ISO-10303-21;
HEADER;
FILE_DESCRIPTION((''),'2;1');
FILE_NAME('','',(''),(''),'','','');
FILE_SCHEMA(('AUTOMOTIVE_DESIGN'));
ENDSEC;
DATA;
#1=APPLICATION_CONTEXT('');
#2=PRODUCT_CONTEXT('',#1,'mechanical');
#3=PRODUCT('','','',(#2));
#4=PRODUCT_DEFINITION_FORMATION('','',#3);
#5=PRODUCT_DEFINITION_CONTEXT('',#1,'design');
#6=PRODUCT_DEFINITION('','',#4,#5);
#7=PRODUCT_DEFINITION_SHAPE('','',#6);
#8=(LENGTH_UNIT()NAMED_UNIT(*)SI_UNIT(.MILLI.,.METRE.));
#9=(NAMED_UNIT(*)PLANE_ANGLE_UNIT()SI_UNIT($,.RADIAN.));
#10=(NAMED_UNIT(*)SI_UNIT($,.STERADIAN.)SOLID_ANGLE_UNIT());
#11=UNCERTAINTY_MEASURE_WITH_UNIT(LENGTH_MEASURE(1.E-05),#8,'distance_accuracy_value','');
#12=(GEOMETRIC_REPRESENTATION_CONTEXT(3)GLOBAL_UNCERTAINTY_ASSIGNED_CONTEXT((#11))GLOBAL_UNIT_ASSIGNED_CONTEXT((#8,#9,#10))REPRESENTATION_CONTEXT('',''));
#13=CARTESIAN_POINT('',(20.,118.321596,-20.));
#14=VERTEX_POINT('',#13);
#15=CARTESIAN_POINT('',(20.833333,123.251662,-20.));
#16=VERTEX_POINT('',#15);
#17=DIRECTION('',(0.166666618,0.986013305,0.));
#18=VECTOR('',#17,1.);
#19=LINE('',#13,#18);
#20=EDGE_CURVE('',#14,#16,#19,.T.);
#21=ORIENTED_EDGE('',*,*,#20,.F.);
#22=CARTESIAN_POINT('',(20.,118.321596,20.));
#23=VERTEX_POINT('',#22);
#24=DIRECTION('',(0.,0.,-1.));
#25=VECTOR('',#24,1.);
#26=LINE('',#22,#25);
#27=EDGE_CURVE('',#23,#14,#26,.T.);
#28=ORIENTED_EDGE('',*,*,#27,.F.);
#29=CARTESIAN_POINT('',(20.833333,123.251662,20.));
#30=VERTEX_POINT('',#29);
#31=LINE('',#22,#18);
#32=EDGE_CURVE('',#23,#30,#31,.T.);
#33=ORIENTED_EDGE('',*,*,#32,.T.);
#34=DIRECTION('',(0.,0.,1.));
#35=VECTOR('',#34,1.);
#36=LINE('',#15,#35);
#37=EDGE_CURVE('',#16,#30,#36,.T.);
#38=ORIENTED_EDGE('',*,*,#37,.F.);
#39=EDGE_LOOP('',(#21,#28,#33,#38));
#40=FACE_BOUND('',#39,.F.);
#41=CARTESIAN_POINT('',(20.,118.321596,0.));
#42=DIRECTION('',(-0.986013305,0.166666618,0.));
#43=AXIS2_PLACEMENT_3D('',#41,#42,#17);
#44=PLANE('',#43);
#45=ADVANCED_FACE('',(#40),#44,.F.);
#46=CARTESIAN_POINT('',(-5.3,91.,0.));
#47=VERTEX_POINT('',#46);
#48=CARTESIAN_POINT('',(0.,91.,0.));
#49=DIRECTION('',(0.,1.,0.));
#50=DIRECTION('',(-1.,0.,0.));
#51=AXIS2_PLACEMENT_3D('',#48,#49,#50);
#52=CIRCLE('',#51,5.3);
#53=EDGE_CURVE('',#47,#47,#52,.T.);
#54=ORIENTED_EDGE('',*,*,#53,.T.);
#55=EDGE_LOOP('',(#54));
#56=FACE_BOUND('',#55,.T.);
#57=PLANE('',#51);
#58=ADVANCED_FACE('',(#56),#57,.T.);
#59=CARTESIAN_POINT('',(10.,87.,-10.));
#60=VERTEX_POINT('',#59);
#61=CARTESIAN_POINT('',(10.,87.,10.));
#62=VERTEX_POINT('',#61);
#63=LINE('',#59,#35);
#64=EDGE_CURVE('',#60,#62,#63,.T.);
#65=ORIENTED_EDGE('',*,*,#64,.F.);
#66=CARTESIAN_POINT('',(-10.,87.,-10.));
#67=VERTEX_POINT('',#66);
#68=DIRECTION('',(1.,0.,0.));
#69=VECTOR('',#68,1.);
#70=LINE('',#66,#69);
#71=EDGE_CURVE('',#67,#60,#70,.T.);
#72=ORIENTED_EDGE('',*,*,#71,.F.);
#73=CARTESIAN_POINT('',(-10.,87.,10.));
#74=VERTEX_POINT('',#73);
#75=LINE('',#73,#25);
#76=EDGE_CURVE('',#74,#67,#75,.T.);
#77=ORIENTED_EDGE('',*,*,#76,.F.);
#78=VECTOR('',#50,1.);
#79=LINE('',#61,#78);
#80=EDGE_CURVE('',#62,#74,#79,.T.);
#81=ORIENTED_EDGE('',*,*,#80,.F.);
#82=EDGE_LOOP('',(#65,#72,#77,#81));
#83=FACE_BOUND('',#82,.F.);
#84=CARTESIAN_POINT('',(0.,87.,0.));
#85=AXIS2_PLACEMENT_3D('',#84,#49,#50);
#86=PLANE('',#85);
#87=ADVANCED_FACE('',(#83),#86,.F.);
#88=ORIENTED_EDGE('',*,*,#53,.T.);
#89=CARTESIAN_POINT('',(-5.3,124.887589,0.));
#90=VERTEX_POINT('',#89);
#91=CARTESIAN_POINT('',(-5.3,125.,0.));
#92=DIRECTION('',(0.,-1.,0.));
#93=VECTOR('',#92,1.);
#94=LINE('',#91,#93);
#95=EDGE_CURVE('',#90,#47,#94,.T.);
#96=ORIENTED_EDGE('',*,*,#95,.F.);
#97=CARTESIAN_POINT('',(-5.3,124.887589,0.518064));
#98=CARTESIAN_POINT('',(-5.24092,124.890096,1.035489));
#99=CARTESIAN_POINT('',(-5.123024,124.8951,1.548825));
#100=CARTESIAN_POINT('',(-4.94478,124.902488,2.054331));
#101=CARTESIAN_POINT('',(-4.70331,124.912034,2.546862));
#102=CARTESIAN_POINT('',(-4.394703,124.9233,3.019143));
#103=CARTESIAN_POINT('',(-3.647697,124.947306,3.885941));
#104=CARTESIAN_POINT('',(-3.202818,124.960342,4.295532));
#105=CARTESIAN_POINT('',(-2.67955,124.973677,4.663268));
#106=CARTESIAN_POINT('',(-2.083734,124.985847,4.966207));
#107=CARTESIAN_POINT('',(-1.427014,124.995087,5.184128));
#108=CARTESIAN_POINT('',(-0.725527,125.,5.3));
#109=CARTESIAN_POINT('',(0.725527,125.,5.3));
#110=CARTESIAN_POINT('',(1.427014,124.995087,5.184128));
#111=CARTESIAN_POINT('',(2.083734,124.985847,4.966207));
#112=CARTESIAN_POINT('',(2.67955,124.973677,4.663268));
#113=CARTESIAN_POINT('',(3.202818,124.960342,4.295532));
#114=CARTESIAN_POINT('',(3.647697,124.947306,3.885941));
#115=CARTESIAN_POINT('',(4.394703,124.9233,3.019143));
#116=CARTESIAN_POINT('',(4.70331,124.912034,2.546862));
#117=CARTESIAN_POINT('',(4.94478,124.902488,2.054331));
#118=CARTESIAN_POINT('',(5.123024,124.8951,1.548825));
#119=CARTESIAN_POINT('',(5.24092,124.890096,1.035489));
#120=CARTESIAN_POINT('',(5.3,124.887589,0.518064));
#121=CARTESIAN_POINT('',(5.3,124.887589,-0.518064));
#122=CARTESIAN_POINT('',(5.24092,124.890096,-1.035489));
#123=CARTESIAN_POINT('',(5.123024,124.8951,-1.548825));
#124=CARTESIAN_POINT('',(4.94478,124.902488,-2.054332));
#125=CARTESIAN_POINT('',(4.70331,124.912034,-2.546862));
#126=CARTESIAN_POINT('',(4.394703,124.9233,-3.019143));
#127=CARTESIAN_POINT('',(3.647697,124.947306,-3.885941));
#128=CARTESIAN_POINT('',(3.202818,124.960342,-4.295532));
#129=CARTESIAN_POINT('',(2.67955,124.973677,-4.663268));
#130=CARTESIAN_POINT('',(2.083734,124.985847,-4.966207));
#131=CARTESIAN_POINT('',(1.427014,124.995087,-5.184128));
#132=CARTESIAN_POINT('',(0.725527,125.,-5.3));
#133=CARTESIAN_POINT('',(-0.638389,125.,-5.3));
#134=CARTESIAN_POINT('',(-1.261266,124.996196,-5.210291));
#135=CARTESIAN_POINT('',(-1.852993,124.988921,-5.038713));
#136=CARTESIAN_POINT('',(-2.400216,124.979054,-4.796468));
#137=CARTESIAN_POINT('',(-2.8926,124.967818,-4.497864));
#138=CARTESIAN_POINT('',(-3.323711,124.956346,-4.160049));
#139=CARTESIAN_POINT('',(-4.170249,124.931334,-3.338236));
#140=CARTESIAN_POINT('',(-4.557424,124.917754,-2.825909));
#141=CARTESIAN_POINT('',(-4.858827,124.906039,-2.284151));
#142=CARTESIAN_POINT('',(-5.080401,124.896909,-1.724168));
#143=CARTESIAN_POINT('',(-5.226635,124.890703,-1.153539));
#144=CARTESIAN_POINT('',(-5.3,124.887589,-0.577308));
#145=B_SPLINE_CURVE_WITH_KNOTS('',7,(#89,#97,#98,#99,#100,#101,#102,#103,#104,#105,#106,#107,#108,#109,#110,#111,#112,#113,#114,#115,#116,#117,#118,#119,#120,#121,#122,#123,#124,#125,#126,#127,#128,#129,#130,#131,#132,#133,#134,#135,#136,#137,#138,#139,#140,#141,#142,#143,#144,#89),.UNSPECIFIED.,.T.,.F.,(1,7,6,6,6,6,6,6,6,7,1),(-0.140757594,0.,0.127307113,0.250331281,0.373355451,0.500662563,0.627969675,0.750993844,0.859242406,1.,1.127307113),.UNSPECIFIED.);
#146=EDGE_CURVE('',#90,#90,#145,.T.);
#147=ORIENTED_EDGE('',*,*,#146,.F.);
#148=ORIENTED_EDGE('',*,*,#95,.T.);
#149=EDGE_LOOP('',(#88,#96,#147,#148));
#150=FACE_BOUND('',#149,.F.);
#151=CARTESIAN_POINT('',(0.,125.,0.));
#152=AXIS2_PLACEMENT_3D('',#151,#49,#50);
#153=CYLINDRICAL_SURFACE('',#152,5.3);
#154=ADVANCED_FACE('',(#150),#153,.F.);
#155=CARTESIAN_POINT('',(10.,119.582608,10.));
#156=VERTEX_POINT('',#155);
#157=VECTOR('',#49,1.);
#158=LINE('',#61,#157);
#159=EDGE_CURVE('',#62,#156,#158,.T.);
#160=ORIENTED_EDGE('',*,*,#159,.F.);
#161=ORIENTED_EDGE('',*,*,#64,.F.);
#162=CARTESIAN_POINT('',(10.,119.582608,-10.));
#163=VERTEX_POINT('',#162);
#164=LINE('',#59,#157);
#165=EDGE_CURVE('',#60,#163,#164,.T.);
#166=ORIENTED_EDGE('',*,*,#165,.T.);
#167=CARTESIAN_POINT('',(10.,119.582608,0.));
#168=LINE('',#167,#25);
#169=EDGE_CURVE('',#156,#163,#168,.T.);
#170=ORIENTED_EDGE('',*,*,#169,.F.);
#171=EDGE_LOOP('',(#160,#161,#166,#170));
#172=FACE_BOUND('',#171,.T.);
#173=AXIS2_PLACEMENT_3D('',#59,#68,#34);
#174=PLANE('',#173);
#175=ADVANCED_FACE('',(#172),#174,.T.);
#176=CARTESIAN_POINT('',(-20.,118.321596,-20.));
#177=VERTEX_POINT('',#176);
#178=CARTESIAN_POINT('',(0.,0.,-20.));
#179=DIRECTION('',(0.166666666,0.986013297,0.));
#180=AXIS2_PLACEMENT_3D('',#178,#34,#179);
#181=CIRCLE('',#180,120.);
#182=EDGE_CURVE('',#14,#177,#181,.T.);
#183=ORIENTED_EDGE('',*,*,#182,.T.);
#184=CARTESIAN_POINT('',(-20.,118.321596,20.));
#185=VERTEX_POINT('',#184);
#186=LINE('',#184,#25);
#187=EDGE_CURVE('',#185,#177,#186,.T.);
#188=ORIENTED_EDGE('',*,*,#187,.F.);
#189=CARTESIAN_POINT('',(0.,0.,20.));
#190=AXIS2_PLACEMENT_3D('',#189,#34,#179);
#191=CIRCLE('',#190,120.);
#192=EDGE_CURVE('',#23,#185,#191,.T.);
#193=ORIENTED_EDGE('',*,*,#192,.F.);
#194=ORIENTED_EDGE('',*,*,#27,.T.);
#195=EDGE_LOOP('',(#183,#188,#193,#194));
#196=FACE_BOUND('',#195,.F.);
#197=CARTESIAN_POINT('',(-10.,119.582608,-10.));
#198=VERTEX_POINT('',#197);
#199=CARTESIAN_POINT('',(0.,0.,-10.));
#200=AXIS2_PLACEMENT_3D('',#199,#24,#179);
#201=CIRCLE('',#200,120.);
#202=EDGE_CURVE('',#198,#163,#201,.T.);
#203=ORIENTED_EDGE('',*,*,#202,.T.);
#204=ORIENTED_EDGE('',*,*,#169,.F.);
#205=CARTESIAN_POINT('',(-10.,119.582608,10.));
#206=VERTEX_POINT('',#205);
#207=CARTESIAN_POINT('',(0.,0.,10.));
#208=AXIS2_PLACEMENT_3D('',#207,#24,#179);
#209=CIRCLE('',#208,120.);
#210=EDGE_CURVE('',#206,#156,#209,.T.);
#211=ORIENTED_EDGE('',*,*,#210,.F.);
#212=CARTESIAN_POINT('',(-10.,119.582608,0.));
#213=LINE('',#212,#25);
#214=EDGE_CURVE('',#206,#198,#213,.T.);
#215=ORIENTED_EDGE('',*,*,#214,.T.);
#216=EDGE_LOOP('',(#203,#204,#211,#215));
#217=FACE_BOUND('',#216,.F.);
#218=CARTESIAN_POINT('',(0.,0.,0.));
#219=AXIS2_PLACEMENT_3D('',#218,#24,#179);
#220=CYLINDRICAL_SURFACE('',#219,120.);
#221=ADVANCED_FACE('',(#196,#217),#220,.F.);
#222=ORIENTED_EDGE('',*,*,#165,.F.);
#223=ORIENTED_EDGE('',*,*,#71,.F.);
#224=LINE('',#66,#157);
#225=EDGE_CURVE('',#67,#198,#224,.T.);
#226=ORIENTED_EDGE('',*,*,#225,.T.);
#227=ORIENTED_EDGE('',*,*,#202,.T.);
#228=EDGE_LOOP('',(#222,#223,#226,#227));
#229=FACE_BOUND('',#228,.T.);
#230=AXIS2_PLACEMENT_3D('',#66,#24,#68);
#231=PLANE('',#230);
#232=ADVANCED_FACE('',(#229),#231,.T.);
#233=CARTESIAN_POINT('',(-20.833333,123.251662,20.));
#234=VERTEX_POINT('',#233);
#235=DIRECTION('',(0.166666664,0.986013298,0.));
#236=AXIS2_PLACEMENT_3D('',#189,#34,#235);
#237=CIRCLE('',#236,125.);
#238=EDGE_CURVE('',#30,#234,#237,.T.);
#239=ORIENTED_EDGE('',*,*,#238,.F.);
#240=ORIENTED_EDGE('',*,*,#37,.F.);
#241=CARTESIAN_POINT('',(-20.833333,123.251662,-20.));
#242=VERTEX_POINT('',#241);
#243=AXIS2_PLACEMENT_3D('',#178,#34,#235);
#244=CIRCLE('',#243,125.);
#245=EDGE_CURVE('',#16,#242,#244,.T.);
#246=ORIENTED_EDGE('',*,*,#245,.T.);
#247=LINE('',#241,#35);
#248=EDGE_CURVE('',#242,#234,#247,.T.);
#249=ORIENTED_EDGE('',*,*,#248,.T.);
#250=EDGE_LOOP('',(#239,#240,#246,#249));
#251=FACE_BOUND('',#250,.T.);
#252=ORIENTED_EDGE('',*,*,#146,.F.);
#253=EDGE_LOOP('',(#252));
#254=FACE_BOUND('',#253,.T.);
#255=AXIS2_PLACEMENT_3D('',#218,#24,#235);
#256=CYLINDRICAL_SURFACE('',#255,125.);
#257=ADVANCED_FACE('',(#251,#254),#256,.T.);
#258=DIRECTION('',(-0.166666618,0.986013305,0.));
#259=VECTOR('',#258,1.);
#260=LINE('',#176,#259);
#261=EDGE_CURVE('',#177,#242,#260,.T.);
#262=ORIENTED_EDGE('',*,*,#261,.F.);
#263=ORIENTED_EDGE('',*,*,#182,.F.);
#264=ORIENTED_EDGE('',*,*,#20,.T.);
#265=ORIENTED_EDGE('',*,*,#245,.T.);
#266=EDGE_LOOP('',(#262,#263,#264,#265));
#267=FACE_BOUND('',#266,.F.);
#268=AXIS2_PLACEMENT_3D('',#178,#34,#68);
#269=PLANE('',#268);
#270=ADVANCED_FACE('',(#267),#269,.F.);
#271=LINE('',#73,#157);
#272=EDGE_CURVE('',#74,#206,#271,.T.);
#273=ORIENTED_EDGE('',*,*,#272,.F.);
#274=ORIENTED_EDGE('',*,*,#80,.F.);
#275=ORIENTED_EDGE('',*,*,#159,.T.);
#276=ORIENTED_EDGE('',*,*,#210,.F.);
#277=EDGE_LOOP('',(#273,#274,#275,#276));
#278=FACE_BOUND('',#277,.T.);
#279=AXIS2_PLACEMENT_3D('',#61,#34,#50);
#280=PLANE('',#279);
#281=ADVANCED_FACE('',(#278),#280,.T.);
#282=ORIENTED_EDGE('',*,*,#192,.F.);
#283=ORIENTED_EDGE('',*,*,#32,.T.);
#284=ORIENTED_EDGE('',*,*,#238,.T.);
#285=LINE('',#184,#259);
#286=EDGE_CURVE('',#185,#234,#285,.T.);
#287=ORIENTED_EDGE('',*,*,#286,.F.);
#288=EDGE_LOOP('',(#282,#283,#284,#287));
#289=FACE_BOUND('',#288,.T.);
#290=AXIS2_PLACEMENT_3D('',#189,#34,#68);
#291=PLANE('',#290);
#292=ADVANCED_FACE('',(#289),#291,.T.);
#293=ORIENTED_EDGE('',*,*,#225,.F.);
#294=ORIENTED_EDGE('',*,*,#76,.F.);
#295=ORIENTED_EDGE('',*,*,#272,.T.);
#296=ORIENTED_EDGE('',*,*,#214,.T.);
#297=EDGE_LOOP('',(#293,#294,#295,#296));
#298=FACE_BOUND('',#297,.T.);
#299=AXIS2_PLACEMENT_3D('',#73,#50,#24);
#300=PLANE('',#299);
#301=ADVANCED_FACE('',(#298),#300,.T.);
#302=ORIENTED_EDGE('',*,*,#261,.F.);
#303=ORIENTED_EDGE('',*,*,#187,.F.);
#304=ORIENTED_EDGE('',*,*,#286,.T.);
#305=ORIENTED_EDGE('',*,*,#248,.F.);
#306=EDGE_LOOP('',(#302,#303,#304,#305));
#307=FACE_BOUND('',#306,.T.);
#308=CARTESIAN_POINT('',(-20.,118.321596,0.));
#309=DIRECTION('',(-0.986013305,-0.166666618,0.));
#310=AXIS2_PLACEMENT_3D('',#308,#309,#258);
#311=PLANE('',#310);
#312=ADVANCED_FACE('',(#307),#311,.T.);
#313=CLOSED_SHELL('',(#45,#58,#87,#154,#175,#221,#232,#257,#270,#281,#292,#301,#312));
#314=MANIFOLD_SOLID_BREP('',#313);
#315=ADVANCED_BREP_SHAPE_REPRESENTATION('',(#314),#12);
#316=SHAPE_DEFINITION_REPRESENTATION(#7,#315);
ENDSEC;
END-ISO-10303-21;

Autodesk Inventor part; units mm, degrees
ref_plane "YZ Plane" through (0, 0, 0) normal (1, 0, 0) x (0, 1, 0)
ref_plane "XY Plane" through (0, 0, 0) normal (0, 0, 1) x (1, 0, 0)
sketch "Sketch1" plane through (0, 0, 0) normal (0, 0, 1) x (1, 0, 0)
  arc A0 (20.833333, 123.251662) -> (-20.833333, 123.251662) centre (0, 0) ccw
  arc A1 (20, 118.321596) -> (-20, 118.321596) centre (0, 0) ccw
  line L0 (-20, 118.321596) -> (-20.833333, 123.251662)
  line L1 (0, 0) -> (0, 133.48158) construction
  line L2 (20, 118.321596) -> (20.833333, 123.251662)
  dimension "d0" = 250
  dimension "d1" = 5
  dimension "d2" = 40
extrude "Extrusion1" add sketch "Sketch1" along normal mid plane 40
ref_plane "Work Plane3" through (0, 87, 0) normal (0, 1, 0) x (-1, 0, 0)
ref_plane "Work Plane2" through (0, 125, 0) normal (0, 1, 0) x (-1, 0, 0)
sketch "Sketch3" plane through (0, 87, 0) normal (0, 1, 0) x (-1, 0, 0)
  line L0 (10, -10) -> (-10, -10)
  line L1 (-10, -10) -> (-10, 10)
  line L2 (-10, 10) -> (10, 10)
  line L3 (10, 10) -> (10, -10)
  line L4 (10, -10) -> (-10, 10) construction
  line L5 (-10, -10) -> (10, 10) construction
  point P0 (0, 0)
  dimension "d6" = 20
  dimension "d7" = 20
extrude "Extrusion2" add sketch "Sketch3" along normal up to next
sketch "Sketch4" plane through (0, 125, 0) normal (0, 1, 0) x (-1, 0, 0)
  circle A0 centre (0, 0) radius 5.3
  dimension "d10" = 10.6
extrude "Extrusion3" cut sketch "Sketch4" against normal blind 34
properties part number "shiftt_fixed_plate" material "Acetal Resin, Black"
